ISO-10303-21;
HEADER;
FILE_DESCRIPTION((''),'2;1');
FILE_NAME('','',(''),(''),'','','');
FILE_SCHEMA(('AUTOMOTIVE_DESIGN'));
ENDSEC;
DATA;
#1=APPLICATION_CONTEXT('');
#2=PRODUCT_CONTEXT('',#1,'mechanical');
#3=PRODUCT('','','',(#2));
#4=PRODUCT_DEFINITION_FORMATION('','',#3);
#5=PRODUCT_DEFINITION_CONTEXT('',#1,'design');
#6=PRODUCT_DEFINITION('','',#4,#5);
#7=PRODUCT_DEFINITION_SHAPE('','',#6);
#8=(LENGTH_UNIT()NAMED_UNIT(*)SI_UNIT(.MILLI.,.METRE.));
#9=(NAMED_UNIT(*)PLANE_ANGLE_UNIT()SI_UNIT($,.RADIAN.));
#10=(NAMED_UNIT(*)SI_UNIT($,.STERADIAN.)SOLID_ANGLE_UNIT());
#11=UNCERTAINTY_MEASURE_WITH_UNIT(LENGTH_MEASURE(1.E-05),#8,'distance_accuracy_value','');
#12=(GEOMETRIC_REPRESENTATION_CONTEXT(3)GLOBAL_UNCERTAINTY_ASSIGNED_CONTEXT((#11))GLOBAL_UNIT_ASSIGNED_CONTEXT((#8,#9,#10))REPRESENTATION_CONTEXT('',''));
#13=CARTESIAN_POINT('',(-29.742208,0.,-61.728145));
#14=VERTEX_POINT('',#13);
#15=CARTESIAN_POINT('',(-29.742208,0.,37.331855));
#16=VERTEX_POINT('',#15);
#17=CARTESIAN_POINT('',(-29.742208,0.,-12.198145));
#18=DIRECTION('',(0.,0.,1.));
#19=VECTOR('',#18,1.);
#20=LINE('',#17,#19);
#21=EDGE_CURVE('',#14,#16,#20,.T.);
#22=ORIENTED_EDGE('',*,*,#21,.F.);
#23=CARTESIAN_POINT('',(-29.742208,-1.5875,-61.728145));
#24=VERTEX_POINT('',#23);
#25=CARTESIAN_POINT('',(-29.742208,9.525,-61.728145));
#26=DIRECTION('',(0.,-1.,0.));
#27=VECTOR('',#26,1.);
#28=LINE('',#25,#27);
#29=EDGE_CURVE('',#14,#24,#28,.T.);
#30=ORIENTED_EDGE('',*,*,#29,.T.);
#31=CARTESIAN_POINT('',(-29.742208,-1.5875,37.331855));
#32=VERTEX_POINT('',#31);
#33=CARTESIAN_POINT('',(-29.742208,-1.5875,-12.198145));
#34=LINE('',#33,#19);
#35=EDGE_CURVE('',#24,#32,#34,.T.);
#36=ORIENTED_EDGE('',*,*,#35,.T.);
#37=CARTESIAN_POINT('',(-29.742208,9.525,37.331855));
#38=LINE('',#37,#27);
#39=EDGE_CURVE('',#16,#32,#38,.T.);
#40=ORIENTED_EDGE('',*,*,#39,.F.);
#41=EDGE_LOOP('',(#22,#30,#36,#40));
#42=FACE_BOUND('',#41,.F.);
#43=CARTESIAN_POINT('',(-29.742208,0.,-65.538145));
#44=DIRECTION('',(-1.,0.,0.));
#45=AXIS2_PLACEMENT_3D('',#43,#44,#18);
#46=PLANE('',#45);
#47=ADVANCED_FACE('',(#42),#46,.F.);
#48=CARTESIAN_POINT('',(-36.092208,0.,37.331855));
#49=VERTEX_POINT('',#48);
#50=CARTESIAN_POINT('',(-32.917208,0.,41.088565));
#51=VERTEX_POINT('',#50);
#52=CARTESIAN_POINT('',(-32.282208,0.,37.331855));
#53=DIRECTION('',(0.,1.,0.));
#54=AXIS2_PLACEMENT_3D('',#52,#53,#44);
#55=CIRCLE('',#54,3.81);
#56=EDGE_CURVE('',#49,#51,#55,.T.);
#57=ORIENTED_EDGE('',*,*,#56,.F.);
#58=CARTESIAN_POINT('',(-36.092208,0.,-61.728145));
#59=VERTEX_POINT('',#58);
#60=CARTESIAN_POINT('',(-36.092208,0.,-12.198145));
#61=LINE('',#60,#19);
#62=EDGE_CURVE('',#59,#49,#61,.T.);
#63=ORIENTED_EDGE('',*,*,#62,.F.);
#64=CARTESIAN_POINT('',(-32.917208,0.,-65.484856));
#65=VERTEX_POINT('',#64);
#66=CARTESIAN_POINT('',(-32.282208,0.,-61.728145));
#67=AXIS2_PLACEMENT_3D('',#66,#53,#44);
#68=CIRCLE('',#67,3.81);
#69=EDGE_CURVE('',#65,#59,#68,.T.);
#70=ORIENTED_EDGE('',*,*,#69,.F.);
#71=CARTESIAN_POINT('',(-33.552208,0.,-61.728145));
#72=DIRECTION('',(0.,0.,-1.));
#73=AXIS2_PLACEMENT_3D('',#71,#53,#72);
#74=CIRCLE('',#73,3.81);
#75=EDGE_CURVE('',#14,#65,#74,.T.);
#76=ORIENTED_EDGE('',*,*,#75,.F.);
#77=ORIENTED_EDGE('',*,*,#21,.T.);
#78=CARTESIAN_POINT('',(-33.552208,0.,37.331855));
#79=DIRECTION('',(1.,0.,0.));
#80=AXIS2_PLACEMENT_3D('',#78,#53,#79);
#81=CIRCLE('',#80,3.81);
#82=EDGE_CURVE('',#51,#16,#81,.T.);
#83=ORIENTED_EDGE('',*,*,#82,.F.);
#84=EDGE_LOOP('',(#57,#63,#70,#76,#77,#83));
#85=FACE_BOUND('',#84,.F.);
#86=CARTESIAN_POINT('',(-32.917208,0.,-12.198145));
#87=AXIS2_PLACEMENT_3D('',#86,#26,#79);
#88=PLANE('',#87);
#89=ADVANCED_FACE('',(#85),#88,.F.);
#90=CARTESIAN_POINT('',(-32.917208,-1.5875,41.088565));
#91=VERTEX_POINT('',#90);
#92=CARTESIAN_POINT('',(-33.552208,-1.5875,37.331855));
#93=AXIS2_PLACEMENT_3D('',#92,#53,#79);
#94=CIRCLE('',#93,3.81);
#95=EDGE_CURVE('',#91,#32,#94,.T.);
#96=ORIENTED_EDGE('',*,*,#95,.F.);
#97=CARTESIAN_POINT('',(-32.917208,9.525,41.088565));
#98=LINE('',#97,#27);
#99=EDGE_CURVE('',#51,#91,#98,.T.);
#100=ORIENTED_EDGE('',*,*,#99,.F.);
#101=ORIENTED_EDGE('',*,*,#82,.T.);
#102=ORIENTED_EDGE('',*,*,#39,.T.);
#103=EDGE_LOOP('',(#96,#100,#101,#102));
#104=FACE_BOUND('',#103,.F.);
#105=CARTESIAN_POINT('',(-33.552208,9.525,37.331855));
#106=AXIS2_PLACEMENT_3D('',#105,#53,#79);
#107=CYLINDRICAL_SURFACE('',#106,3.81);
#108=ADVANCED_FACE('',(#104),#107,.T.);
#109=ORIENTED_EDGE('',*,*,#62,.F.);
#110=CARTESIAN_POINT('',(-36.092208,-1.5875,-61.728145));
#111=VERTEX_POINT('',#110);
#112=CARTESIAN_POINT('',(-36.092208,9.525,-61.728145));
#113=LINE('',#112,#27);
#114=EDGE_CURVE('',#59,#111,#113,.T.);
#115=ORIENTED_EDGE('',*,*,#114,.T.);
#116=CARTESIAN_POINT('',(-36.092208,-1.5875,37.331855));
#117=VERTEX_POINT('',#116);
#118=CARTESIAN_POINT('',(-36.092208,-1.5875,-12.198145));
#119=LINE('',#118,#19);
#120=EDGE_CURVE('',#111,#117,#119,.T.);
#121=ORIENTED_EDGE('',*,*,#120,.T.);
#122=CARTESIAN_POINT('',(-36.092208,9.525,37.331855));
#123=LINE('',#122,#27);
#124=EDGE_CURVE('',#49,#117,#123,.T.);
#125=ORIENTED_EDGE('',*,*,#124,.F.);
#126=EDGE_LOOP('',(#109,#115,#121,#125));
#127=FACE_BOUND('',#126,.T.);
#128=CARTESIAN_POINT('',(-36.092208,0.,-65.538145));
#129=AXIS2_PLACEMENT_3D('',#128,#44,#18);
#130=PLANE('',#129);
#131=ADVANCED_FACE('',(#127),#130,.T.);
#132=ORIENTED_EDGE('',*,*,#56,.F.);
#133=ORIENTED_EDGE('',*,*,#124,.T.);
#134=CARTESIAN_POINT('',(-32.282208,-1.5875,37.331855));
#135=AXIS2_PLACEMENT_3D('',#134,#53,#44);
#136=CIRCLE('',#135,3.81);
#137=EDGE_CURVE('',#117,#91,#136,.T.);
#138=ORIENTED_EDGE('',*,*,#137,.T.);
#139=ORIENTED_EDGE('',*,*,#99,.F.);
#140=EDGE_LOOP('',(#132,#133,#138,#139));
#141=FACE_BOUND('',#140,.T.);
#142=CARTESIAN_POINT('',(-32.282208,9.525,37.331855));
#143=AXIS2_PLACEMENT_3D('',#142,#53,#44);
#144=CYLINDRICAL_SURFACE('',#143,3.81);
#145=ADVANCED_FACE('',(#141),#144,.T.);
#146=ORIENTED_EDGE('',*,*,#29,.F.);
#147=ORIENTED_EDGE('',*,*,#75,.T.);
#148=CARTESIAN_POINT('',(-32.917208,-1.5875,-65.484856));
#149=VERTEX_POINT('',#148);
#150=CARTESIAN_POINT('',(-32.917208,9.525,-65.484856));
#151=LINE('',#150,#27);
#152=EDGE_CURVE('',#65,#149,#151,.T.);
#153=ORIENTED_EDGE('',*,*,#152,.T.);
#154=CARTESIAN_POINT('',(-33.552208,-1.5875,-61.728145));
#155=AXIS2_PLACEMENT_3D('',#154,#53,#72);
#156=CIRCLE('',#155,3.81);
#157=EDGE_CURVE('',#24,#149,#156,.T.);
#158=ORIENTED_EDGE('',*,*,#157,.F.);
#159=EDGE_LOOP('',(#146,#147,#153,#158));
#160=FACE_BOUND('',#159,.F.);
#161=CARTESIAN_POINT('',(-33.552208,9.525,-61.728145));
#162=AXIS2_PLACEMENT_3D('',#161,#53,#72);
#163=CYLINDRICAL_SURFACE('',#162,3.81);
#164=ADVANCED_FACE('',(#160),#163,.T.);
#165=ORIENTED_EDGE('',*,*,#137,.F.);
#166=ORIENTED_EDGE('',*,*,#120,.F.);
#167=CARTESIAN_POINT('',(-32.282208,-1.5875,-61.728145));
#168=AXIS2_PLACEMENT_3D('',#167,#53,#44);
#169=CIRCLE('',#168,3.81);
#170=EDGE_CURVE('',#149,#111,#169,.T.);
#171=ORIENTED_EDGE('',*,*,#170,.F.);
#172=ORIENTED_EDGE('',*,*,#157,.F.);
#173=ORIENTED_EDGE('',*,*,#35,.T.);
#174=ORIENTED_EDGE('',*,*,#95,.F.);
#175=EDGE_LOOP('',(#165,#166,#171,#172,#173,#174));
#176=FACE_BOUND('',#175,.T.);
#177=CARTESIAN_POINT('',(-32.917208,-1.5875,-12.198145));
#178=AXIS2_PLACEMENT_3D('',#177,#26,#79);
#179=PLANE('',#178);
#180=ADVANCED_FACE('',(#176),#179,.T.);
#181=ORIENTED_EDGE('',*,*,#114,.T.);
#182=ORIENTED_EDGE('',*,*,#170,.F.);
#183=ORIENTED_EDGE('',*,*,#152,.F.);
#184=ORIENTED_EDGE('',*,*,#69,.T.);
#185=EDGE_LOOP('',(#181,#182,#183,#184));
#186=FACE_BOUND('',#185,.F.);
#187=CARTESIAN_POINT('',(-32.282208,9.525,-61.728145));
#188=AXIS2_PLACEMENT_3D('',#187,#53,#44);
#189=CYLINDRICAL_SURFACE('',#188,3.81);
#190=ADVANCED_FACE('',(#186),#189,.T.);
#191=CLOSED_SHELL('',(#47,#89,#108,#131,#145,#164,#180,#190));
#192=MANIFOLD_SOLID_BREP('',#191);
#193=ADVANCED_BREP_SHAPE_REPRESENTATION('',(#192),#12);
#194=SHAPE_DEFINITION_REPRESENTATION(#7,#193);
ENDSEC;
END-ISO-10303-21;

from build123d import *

# Parameters (mm, degrees)
F0_W        = 6.35
F0_H        = 106.68
F1_DEPTH    = 1.5875
F2_T1_DEPTH = 20.6375
F3_T1_DEPTH = 20.6375


# Not quite as in the source:
# - a fillet or chamfer that OpenCascade refuses, or shapes differently, is made with other operations: its cross-section is extruded or revolved along the edge and cut away or added


with BuildPart() as f1:
    # F0 (on Front) → F1 (new body)
    with BuildSketch(Plane.XZ):
        with Locations((-32.9172081137, -12.1981453611)):
            Rectangle(F0_W, F0_H)
    extrude(amount=F1_DEPTH)

    # F2: fillet of radius 3.81 on 2 edges, made by hand

    # F2_s2 → F2_t1 (cut)
    with BuildSketch(Plane.XZ.offset(-9.525)):
        with BuildLine():
            ThreePointArc((-36.0922081137, 37.3318546389), (-34.97628495, 40.0259314752), (-32.2822081137, 41.1418546389))
            Line((-32.2822081137, 41.1418546389), (-36.0922081137, 41.1418546389))
            Line((-36.0922081137, 41.1418546389), (-36.0922081137, 37.3318546389))
        make_face()
        with BuildLine():
            ThreePointArc((-29.7422081137, 37.3318546389), (-30.8581312774, 40.0259314752), (-33.5522081137, 41.1418546389))
            Line((-33.5522081137, 41.1418546389), (-29.7422081137, 41.1418546389))
            Line((-29.7422081137, 41.1418546389), (-29.7422081137, 37.3318546389))
        make_face()
    extrude(amount=F2_T1_DEPTH, mode=Mode.SUBTRACT)

    # F3: fillet of radius 3.81 on 2 edges, made by hand

    # F3_s2 → F3_t1 (cut)
    with BuildSketch(Plane.XZ.offset(-9.525)):
        with BuildLine():
            ThreePointArc((-36.0922081137, -61.7281453611), (-34.97628495, -64.4222221974), (-32.2822081137, -65.5381453611))
            Line((-32.2822081137, -65.5381453611), (-36.0922081137, -65.5381453611))
            Line((-36.0922081137, -65.5381453611), (-36.0922081137, -61.7281453611))
        make_face()
        with BuildLine():
            ThreePointArc((-33.5522081137, -65.5381453611), (-30.8581312774, -64.4222221974), (-29.7422081137, -61.7281453611))
            Line((-29.7422081137, -61.7281453611), (-29.7422081137, -65.5381453611))
            Line((-29.7422081137, -65.5381453611), (-33.5522081137, -65.5381453611))
        make_face()
    extrude(amount=F3_T1_DEPTH, mode=Mode.SUBTRACT)


solid = f1.part
